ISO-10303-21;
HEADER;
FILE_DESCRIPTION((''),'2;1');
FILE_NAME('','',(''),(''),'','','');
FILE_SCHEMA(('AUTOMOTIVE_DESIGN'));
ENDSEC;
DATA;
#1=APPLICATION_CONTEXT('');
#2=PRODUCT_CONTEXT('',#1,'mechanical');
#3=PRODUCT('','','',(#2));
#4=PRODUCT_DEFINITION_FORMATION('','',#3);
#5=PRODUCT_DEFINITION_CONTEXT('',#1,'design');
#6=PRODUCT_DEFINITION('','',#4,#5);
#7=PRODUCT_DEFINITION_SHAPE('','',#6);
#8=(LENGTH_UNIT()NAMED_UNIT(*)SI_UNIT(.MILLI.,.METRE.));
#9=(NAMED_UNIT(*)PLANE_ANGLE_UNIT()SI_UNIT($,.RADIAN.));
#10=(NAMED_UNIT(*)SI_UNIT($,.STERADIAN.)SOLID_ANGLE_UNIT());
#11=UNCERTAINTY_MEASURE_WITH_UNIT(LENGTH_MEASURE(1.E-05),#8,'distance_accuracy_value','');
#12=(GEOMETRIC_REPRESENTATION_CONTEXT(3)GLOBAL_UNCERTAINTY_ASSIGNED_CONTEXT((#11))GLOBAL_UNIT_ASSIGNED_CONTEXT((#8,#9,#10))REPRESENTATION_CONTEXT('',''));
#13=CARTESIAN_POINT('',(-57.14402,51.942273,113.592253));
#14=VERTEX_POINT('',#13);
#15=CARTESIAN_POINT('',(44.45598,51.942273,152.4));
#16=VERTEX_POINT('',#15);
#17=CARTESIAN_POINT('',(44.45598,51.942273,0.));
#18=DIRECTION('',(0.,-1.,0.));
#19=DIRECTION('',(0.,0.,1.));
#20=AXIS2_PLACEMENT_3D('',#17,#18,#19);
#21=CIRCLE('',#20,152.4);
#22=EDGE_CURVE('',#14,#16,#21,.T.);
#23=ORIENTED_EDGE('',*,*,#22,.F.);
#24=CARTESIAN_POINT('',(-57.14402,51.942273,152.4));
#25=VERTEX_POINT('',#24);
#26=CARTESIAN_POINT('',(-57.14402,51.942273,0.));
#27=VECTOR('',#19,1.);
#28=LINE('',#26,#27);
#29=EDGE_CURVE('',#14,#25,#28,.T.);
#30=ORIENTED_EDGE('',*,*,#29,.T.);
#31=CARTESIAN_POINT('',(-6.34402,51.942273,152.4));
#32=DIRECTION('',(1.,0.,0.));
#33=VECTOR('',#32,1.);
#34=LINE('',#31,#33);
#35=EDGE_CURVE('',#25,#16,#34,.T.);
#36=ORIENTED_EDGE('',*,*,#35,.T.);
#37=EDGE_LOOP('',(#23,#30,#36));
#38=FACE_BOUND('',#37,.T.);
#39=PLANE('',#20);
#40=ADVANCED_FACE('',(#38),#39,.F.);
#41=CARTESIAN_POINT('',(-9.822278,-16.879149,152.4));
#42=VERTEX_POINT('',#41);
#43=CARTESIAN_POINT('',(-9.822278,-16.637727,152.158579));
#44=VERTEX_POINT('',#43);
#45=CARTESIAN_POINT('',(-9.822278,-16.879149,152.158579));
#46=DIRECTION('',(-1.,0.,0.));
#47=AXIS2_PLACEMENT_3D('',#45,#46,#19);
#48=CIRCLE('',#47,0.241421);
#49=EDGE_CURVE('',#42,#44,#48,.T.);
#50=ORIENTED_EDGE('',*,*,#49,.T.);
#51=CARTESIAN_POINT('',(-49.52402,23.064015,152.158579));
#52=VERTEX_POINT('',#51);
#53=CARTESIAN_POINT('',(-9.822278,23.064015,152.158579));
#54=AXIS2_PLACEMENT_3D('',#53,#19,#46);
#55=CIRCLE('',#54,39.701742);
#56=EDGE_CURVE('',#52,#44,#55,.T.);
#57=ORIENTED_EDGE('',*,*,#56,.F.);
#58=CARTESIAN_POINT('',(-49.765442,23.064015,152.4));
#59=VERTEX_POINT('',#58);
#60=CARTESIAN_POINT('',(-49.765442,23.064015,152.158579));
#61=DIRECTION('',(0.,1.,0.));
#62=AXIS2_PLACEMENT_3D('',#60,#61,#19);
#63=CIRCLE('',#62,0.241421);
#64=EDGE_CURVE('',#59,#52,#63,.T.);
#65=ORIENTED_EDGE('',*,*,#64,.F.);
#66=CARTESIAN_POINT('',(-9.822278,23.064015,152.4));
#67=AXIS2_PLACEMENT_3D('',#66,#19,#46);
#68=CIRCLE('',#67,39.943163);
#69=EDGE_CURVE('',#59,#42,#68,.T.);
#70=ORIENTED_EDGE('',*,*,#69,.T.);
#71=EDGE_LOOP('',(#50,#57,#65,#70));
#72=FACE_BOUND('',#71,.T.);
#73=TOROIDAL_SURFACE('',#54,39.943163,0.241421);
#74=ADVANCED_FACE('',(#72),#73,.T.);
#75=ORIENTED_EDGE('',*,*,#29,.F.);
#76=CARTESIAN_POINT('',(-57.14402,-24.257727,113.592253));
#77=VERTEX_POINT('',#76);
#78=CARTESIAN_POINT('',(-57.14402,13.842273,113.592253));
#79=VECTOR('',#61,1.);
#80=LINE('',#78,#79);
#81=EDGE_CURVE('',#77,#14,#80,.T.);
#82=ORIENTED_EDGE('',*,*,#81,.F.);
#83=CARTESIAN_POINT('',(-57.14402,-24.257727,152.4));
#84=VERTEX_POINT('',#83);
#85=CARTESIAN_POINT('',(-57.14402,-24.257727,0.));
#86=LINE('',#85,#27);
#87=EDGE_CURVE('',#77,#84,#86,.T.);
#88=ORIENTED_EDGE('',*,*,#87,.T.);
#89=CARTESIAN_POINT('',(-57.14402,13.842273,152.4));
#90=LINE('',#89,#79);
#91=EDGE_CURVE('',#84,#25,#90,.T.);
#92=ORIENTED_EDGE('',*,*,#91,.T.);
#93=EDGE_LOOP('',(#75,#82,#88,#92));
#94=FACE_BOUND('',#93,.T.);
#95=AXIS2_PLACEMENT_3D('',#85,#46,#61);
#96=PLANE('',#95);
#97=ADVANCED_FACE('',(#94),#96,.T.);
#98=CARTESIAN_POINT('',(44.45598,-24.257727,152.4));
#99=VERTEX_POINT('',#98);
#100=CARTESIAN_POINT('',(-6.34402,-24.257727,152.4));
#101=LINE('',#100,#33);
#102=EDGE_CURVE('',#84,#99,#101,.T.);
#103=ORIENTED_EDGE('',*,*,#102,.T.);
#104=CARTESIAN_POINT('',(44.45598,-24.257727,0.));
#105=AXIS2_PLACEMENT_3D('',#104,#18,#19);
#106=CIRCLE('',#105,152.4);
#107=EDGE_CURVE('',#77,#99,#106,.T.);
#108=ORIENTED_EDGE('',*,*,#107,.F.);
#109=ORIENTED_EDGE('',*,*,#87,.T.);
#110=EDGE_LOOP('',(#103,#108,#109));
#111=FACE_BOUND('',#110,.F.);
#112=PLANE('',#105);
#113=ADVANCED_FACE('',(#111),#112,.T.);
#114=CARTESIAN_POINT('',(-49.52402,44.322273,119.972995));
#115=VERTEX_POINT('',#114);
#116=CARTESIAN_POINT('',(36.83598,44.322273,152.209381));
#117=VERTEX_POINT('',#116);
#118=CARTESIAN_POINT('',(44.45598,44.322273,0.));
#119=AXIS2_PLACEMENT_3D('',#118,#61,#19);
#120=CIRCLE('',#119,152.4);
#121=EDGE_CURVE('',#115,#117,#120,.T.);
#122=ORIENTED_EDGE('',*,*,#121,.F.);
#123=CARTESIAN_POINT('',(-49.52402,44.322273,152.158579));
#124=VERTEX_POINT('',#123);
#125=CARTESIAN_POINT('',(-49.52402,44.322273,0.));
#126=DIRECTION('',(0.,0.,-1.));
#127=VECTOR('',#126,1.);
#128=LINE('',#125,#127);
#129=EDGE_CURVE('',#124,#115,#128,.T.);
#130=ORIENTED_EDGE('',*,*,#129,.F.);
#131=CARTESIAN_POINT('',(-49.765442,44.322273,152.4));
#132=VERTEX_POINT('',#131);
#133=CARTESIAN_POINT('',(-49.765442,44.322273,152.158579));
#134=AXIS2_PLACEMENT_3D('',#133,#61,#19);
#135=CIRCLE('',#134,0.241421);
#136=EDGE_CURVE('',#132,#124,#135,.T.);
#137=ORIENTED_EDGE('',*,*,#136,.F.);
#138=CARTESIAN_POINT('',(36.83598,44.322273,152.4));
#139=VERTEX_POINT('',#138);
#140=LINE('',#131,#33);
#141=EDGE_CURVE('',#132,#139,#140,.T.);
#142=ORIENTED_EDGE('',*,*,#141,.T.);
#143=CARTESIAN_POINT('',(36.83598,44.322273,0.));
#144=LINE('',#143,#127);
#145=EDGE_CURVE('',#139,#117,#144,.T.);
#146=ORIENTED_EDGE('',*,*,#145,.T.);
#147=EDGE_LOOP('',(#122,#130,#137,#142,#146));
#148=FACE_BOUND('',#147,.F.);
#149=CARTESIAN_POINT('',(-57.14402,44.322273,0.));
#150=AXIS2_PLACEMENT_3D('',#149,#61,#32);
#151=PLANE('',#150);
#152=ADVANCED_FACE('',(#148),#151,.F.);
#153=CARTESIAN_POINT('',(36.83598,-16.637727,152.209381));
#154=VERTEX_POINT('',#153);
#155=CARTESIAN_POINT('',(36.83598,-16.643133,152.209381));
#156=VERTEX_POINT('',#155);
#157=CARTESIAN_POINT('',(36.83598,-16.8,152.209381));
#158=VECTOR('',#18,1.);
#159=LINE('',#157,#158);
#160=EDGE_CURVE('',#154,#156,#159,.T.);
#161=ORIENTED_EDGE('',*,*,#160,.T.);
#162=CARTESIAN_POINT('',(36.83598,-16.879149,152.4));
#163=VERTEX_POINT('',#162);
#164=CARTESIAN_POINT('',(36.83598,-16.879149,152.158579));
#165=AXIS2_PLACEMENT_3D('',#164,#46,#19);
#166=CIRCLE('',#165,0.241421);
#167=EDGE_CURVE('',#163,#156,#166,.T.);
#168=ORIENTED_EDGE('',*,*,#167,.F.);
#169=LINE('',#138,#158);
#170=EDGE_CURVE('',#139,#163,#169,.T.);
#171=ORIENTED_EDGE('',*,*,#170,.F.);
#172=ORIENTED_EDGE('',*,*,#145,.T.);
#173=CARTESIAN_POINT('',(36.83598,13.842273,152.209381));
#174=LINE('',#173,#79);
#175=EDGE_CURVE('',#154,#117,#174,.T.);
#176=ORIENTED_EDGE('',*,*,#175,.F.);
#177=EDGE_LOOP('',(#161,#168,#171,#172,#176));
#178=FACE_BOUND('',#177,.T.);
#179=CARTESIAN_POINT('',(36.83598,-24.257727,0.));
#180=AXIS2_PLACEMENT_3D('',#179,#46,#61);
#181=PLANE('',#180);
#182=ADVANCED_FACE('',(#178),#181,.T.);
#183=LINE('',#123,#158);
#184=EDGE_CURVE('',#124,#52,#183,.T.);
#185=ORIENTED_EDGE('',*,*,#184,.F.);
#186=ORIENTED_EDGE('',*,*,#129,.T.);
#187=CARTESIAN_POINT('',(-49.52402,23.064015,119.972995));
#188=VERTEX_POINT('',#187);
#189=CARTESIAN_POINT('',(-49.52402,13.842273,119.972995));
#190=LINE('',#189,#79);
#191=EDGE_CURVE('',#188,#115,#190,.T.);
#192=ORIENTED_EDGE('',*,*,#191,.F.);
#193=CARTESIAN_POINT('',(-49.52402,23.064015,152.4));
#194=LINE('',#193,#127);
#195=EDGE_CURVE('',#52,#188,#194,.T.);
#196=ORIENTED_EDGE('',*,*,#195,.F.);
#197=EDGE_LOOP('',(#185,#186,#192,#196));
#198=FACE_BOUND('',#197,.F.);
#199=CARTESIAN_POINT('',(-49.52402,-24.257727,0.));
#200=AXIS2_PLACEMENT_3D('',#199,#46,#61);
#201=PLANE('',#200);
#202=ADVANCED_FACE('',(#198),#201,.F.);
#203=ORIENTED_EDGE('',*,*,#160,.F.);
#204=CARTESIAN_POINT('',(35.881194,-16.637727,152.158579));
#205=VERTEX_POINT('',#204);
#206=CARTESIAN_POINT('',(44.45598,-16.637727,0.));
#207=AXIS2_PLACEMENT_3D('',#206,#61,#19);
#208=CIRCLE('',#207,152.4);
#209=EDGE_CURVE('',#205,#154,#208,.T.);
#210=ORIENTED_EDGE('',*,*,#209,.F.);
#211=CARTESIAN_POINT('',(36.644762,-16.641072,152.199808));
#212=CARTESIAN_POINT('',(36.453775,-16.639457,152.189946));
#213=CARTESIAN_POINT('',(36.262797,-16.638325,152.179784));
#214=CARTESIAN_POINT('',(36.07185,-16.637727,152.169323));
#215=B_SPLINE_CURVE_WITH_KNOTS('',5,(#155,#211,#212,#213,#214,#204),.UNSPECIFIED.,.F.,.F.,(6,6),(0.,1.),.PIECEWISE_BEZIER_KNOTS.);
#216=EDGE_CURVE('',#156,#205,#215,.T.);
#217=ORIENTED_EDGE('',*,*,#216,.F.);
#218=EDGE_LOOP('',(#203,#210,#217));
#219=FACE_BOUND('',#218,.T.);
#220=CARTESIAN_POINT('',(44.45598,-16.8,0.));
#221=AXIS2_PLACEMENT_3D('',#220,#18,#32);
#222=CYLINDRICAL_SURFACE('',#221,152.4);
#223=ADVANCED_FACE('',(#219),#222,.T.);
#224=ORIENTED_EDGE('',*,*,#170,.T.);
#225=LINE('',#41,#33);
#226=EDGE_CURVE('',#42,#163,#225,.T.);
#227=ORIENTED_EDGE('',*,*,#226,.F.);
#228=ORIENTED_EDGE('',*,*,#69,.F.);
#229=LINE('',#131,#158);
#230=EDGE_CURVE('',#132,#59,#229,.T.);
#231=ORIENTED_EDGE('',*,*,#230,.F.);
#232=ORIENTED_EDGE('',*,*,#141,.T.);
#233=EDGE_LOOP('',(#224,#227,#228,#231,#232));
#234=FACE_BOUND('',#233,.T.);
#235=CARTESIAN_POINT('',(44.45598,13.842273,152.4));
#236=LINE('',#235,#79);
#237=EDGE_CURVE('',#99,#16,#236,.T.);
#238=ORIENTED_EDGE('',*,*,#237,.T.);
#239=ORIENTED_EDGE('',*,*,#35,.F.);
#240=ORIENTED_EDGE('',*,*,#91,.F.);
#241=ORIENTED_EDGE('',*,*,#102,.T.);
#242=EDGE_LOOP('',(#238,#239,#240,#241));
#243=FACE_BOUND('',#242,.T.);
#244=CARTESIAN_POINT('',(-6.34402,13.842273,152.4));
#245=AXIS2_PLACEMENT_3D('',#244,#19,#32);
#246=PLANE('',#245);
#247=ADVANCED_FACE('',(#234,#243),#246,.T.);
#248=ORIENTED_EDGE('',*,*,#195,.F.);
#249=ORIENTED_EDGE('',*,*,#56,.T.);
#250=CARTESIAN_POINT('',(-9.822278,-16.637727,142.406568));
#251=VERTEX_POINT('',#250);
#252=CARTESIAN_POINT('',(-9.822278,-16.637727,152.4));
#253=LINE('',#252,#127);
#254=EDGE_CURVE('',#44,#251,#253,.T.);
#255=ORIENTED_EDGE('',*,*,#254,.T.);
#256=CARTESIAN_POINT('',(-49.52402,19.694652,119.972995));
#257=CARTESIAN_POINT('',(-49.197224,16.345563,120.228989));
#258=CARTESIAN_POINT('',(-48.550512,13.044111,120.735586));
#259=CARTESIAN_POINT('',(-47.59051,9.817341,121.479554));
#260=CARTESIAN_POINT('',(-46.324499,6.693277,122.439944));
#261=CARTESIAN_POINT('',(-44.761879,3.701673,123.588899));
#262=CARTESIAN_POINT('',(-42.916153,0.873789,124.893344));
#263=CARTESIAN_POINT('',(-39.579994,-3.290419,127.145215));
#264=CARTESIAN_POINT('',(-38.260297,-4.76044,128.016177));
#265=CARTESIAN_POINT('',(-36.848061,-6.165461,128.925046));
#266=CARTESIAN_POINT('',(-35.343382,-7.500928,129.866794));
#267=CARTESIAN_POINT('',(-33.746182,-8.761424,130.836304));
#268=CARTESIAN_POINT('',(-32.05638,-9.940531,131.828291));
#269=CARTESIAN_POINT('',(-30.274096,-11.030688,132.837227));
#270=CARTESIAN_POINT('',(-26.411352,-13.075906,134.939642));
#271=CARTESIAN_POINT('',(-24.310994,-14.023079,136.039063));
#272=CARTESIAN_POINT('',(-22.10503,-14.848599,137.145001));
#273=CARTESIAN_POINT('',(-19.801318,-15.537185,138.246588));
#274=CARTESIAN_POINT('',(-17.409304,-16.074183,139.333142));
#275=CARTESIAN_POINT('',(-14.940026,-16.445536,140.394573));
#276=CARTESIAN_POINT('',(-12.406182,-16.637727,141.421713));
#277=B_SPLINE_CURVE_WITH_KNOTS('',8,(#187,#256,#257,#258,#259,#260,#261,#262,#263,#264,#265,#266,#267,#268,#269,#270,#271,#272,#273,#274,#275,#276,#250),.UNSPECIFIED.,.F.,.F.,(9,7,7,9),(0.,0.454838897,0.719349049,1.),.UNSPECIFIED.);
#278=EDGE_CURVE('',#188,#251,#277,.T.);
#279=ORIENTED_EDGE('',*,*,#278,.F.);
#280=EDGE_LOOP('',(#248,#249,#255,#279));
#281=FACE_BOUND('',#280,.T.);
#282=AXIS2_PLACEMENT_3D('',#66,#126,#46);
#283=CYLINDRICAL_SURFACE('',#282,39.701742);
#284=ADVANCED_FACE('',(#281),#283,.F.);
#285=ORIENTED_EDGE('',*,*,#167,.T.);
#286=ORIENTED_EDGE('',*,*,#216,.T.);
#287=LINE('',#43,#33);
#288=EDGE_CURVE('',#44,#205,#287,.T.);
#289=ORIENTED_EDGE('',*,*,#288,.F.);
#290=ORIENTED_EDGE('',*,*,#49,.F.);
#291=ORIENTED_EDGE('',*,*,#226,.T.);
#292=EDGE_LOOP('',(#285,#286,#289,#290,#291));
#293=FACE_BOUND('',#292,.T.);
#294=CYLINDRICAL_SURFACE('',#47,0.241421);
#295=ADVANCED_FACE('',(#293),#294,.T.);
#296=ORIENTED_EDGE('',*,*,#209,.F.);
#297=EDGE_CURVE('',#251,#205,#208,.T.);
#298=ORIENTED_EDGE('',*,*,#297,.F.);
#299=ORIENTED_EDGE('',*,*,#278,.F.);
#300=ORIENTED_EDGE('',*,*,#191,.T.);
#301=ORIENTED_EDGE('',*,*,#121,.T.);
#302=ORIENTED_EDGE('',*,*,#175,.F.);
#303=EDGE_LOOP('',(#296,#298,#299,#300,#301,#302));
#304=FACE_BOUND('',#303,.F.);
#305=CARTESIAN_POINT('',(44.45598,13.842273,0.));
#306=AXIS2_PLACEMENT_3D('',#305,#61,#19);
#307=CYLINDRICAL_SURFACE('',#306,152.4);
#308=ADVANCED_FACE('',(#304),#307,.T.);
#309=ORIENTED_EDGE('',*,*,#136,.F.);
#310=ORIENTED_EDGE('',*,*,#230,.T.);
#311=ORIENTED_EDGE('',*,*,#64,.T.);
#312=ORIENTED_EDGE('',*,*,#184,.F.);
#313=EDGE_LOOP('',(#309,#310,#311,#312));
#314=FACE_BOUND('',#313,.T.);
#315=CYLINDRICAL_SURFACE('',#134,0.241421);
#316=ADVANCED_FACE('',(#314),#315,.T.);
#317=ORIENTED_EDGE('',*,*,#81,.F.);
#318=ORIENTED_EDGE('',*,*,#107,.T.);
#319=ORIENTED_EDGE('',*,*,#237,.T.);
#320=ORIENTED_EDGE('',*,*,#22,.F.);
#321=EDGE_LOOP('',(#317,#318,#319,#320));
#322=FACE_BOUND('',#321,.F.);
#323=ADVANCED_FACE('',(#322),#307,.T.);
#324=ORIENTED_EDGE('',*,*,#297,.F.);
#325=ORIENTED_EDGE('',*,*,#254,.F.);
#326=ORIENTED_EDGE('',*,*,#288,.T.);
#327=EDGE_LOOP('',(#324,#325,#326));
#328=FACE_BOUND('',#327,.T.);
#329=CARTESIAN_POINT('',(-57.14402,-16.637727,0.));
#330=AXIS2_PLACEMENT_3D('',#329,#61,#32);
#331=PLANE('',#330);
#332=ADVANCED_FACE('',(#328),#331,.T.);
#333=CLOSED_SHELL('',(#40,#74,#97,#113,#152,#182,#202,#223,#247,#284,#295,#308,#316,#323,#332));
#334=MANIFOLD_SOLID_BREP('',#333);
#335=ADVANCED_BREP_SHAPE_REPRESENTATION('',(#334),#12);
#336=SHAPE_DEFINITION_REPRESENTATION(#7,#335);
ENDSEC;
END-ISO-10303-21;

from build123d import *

# Parameters (mm, degrees)
F0_W         = 101.6
F0_H         = 76.2
F1_DEPTH     = 152.4
F2_T         = -7.62
F3_R         = 39.7017420332
F1_FACE_W    = 76.2
F1_FACE_H    = 152.4
F5_T3_ANGLE  = 90
F5_T6_DEPTH  = 21.2582579668
F5_T9_DEPTH  = 46.6582579668
F5_S10_R     = 152.4
F5_T11_DEPTH = 25


# Not quite as in the source:
# - a fillet or chamfer that OpenCascade refuses, or shapes differently, is made with other operations: its cross-section is extruded or revolved along the edge and cut away or added


with BuildPart() as f1:
    # F0 (on Top) → F1 (new body)
    with BuildSketch(Plane.XY):
        with Locations((-6.3440203667, 13.8422726145)):
            Rectangle(F0_W, F0_H)
    extrude(amount=F1_DEPTH)

    # F2
    f2_openings = [f1.faces().sort_by_distance(p)[0] for p in [
        (-6.34402, 13.842273, 152.4),
    ]]
    offset(amount=F2_T, openings=f2_openings)

    # F3
    f3_edges = [f1.edges().sort_by_distance(p)[0] for p in [
        (-49.52402, -16.637727, 80.01),
    ]]
    fillet(f3_edges, radius=F3_R)

    # F1_face (on face) → F4 (revolve)
    with BuildSketch(Plane(origin=(44.4559796333, 13.8422726145, 76.2), x_dir=(0, 1, 0), z_dir=(1, 0, 0))):
        Rectangle(F1_FACE_W, F1_FACE_H)
    revolve(axis=Axis((44.4559796333, 13.8422726145, 0), (0, -1, 0)))

    # F5: fillet of radius 0.2414213562 on 1 edges, made by hand


with BuildPart() as f5_tool1:
    # F5_s2 → F5_t3 (revolve)
    with BuildSketch(Plane.XZ.offset(-23.0640146477)):
        with BuildLine():
            ThreePointArc((-49.7654417229, 152.4), (-49.5947310448, 152.3292893219), (-49.5240203667, 152.1585786438))
            Line((-49.5240203667, 152.1585786438), (-49.5240203667, 152.4))
            Line((-49.5240203667, 152.4), (-49.7654417229, 152.4))
        make_face()
    revolve(axis=Axis((-9.8222783334, 23.0640146477, 152.4), (0, 0, 1)), revolution_arc=F5_T3_ANGLE)


with BuildPart() as f5_tool4:
    # F5_s5 → F5_t6 (new body)
    with BuildSketch(Plane.XZ.offset(-44.3222726145)):
        with BuildLine():
            ThreePointArc((-49.7654417229, 152.4), (-49.5947310448, 152.3292893219), (-49.5240203667, 152.1585786438))
            Line((-49.5240203667, 152.1585786438), (-49.5240203667, 152.4))
            Line((-49.5240203667, 152.4), (-49.7654417229, 152.4))
        make_face()
    extrude(amount=F5_T6_DEPTH)


with BuildPart() as f5_tool7:
    # F5_s8 → F5_t9 (new body)
    with BuildSketch(Plane.YZ.offset(-9.8222783334)):
        with BuildLine():
            ThreePointArc((-16.8791487417, 152.4), (-16.7084380636, 152.3292893219), (-16.6377273855, 152.1585786438))
            Line((-16.6377273855, 152.1585786438), (-16.6377273855, 152.4))
            Line((-16.6377273855, 152.4), (-16.8791487417, 152.4))
        make_face()
    extrude(amount=F5_T9_DEPTH)

    # F5_s10 → F5_t11 (cut, symmetric)
    with BuildSketch(Plane.XZ.offset(16.8)):
        with Locations((44.4559796333, 0)):
            Circle(F5_S10_R)
    extrude(amount=F5_T11_DEPTH, both=True, mode=Mode.SUBTRACT)


with BuildPart() as f1_1:
    add(f1.part)

    # F5_t12: cut F5_tool1, F5_tool4, F5_tool7
    add([f5_tool1.part, f5_tool4.part, f5_tool7.part], mode=Mode.SUBTRACT)


solid = f1_1.part
